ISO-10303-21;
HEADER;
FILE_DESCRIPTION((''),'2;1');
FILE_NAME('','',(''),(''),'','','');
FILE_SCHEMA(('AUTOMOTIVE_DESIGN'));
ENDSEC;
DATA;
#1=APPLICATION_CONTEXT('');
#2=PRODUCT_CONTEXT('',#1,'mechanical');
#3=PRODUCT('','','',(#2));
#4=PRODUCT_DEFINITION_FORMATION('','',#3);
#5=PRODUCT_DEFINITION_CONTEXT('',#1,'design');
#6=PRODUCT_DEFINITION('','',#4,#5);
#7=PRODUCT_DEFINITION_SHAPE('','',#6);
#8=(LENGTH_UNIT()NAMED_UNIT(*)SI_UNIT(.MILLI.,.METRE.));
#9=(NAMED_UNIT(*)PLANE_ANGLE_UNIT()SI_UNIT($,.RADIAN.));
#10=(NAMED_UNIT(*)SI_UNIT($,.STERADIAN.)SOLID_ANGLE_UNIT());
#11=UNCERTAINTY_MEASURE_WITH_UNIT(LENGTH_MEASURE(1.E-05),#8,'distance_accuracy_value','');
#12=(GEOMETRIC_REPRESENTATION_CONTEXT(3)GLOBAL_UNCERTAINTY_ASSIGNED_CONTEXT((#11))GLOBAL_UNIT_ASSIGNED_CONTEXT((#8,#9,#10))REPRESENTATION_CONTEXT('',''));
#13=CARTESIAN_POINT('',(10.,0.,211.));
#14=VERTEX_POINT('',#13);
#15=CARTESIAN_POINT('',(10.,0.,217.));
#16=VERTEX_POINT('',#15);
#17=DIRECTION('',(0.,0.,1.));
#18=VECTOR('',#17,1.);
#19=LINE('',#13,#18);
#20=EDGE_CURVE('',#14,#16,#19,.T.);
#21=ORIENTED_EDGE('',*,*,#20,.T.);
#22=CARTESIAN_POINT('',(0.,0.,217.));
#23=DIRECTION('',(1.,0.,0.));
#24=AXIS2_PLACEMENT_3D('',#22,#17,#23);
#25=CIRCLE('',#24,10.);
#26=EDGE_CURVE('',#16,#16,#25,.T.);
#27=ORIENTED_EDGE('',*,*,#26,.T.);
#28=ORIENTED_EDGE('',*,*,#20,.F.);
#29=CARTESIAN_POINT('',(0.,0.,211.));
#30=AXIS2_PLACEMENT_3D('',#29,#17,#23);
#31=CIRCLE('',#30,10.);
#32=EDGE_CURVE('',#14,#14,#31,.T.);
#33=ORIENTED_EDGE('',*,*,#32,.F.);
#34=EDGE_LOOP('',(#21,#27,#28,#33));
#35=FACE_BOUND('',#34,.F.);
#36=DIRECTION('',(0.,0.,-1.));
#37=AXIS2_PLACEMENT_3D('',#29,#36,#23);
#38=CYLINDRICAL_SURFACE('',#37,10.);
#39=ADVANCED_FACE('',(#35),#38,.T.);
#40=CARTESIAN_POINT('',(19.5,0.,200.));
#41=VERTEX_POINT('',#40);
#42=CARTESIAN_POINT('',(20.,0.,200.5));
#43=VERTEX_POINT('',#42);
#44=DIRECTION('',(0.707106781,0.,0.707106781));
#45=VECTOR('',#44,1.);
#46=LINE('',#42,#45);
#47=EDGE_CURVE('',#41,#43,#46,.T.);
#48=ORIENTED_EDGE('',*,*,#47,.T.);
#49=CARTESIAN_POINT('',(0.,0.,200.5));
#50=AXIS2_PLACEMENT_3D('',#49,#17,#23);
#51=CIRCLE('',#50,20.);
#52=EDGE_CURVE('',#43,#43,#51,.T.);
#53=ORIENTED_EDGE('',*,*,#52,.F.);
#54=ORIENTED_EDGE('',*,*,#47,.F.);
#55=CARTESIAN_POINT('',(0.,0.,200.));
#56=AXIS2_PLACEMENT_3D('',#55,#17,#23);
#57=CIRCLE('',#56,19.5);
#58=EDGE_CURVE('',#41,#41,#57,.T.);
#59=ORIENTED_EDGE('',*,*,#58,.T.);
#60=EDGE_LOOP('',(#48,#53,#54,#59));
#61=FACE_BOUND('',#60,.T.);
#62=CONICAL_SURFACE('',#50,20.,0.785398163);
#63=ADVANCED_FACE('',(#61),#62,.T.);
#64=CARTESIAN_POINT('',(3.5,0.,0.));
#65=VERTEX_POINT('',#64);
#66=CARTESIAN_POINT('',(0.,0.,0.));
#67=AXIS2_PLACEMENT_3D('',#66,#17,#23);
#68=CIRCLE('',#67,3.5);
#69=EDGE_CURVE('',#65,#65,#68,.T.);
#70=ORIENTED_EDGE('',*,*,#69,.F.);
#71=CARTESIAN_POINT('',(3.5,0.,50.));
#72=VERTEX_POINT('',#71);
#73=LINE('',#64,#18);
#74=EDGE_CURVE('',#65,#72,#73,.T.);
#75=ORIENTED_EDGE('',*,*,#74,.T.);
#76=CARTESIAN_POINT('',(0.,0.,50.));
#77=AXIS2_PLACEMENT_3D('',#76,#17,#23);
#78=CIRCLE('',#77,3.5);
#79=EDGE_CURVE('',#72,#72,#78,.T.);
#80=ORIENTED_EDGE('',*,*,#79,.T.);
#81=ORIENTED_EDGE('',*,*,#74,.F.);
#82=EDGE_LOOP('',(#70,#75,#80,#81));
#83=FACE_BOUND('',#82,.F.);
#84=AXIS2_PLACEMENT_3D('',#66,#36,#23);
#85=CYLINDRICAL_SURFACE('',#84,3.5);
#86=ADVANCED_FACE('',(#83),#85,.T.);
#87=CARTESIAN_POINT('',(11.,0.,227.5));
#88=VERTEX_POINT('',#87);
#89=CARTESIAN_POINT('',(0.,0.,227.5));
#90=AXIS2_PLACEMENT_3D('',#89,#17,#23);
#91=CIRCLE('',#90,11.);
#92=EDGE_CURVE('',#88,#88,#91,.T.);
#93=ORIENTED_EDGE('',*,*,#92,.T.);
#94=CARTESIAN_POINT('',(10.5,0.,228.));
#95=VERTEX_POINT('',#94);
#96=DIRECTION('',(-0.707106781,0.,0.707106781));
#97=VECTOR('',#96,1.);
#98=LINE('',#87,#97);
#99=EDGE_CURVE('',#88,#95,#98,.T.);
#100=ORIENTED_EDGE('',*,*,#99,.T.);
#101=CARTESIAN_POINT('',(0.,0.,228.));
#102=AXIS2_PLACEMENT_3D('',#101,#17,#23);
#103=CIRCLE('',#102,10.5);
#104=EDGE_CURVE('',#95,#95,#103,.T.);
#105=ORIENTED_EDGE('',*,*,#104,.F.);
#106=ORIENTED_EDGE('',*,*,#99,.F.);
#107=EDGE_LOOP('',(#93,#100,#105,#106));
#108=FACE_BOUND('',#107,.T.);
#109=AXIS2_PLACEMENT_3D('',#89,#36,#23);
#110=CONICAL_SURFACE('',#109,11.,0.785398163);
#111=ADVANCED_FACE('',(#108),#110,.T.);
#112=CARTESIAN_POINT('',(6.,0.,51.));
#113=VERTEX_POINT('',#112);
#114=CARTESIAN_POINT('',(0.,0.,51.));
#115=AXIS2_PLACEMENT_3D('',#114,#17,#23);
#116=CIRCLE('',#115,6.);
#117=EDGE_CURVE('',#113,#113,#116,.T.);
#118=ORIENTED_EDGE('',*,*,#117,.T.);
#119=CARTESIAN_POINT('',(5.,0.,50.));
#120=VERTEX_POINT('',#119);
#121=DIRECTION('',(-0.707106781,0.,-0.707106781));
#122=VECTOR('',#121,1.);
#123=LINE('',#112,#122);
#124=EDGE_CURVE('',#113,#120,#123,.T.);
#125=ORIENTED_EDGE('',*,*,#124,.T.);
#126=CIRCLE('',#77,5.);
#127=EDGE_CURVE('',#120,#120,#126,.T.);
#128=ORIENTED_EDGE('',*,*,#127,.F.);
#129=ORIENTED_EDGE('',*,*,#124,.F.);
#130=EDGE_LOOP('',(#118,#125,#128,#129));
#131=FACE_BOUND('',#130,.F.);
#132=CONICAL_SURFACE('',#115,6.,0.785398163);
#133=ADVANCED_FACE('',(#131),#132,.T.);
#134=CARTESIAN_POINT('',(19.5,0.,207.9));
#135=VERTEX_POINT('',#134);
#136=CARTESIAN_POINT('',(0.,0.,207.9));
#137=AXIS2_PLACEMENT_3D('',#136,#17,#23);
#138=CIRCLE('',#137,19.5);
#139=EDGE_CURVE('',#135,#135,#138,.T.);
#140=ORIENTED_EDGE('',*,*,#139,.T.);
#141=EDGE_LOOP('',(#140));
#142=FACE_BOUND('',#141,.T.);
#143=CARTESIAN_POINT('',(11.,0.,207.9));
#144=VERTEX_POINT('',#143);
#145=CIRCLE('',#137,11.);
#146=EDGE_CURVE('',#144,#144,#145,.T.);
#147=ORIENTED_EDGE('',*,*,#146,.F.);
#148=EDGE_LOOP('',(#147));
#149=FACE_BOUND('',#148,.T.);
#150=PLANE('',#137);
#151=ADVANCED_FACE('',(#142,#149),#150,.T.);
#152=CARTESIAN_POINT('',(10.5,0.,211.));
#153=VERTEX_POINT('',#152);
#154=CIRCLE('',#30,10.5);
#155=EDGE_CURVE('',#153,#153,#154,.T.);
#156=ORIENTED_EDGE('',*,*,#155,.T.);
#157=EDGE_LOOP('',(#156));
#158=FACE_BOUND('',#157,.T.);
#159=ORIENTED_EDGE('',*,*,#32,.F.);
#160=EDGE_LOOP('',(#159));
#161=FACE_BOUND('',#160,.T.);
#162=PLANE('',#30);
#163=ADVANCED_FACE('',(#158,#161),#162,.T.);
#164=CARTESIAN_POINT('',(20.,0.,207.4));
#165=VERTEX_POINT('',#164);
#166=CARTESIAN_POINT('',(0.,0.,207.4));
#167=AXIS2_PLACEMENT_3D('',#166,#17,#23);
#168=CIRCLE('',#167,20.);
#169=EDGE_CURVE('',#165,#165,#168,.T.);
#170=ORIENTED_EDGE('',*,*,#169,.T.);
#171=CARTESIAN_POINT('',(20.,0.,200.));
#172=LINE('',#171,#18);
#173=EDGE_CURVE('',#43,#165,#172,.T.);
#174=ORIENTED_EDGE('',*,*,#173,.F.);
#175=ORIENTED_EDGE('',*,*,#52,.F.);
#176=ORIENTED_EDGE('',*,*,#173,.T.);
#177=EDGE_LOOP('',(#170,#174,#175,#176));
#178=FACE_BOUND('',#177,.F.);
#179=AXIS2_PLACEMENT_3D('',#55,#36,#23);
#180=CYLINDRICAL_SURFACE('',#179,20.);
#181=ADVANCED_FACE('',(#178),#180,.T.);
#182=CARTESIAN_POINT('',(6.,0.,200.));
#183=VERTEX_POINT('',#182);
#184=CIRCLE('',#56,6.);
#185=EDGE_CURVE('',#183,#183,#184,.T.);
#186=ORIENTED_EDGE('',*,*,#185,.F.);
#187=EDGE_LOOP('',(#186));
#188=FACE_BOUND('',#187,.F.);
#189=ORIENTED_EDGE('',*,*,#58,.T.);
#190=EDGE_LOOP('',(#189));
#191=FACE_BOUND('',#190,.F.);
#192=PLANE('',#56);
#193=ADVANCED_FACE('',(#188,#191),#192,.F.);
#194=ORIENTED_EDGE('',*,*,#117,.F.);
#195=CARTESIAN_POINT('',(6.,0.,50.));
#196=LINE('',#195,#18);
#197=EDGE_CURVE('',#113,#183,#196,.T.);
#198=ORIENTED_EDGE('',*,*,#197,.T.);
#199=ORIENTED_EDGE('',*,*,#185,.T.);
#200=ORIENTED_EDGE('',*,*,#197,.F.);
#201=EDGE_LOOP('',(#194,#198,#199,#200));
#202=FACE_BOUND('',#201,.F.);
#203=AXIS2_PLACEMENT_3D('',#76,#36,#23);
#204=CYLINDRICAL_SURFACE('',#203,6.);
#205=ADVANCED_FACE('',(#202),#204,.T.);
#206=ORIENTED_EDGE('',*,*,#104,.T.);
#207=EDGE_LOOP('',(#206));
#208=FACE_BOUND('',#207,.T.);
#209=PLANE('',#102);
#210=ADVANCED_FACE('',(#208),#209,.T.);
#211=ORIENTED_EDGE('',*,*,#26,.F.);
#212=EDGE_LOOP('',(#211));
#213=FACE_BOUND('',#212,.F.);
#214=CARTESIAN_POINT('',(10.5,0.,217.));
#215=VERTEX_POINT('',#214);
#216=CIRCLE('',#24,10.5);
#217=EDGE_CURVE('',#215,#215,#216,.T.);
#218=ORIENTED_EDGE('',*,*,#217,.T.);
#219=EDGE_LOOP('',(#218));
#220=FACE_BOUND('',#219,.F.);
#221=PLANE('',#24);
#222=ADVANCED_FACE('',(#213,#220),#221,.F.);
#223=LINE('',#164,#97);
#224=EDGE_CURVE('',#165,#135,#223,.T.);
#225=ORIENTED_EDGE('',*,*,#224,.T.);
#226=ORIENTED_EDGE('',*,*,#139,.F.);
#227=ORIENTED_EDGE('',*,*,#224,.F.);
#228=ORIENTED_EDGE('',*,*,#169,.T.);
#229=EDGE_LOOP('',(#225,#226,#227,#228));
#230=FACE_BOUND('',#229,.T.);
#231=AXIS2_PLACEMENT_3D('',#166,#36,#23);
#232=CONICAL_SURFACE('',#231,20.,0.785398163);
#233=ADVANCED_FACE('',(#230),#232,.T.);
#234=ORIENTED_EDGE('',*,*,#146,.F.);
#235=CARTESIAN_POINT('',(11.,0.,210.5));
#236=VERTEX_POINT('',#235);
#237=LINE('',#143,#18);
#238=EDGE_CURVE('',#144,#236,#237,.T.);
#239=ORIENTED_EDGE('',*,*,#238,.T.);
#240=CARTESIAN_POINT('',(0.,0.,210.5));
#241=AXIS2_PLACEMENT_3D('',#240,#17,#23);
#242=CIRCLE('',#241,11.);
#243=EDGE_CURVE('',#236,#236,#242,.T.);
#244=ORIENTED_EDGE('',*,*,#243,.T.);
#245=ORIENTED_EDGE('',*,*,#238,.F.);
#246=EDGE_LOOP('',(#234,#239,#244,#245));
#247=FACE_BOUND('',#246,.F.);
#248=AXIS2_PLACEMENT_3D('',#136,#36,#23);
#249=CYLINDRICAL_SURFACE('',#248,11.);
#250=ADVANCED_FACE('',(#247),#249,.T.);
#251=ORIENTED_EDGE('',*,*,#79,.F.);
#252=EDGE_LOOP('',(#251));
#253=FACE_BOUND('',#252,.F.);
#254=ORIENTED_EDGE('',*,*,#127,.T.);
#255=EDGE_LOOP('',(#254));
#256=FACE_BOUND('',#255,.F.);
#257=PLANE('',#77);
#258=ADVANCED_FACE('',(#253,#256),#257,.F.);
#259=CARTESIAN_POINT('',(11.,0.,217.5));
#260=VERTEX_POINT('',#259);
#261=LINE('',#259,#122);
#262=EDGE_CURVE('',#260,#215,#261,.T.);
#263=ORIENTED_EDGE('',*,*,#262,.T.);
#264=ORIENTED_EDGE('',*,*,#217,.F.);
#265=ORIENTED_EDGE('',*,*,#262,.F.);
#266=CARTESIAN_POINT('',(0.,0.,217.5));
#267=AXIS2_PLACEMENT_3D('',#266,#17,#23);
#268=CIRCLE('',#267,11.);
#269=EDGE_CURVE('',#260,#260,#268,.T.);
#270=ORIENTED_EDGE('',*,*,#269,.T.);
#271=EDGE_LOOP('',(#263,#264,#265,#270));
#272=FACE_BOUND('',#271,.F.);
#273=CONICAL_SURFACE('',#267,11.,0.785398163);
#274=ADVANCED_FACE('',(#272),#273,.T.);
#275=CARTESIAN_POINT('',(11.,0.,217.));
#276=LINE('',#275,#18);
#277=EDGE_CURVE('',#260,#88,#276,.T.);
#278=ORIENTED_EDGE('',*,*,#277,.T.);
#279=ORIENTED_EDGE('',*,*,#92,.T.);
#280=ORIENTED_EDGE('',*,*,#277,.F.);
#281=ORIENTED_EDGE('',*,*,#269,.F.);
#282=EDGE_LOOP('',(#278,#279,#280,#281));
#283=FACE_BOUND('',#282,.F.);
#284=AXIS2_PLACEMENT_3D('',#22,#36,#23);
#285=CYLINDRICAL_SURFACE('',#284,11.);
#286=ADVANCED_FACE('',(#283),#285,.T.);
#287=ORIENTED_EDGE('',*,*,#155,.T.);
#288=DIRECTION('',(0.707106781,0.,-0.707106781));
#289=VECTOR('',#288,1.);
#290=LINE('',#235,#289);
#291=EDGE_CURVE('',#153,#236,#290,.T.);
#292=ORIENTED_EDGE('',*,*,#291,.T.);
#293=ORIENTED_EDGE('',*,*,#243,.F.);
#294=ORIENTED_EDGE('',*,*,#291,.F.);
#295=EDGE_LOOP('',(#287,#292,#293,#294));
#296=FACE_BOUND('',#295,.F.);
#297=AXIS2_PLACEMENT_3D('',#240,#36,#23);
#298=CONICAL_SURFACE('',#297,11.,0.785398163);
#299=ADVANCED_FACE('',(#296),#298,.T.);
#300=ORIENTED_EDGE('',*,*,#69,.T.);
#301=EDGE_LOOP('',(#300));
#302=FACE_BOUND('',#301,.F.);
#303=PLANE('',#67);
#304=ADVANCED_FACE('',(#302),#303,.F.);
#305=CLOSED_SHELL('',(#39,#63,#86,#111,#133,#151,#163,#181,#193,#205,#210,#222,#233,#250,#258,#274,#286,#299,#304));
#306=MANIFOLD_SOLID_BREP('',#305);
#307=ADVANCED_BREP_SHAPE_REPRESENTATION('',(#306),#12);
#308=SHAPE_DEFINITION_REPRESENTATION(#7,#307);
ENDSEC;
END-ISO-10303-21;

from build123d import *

# Parameters (mm, degrees)
F0_R      = 3.5
F1_DEPTH  = 50
F2_R      = 6
F3_DEPTH  = 150
F4_R      = 20
F5_DEPTH  = 7.9
F6_SIZE   = 1
F7_SIZE   = 0.5
F8_R      = 11
F9_DEPTH  = 3.1
F10_R     = 10
F11_DEPTH = 6
F12_R     = 11
F13_DEPTH = 11
F14_SIZE  = 0.5


with BuildPart() as f1:
    # F0 (on Top) → F1 (new body)
    with BuildSketch(Plane.XY):
        Circle(F0_R)
    extrude(amount=F1_DEPTH)

    # F2 (on face) → F3 (join)
    with BuildSketch(Plane.XY.offset(50)):
        Circle(F2_R)
    extrude(amount=F3_DEPTH)

    # F4 (on face) → F5 (join)
    with BuildSketch(Plane.XY.offset(200)):
        Circle(F4_R)
    extrude(amount=F5_DEPTH)

    # F6
    f6_edges = [f1.edges().sort_by_distance(p)[0] for p in [
        (-6, 0, 50),
    ]]
    chamfer(f6_edges, length=F6_SIZE)

    # F7
    f7_edges = [f1.edges().sort_by_distance(p)[0] for p in [
        (-20, 0, 200),
        (-20, 0, 207.9),
    ]]
    chamfer(f7_edges, length=F7_SIZE)

    # F8 (on face) → F9 (join)
    with BuildSketch(Plane.XY.offset(207.9)):
        Circle(F8_R)
    extrude(amount=F9_DEPTH)

    # F10 (on face) → F11 (join)
    with BuildSketch(Plane.XY.offset(211)):
        Circle(F10_R)
    extrude(amount=F11_DEPTH)

    # F12 (on face) → F13 (join)
    with BuildSketch(Plane.XY.offset(217)):
        Circle(F12_R)
    extrude(amount=F13_DEPTH)

    # F14
    f14_edges = [f1.edges().sort_by_distance(p)[0] for p in [
        (-11, 0, 211),
        (-11, 0, 217),
        (-11, 0, 228),
    ]]
    chamfer(f14_edges, length=F14_SIZE)


solid = f1.part
